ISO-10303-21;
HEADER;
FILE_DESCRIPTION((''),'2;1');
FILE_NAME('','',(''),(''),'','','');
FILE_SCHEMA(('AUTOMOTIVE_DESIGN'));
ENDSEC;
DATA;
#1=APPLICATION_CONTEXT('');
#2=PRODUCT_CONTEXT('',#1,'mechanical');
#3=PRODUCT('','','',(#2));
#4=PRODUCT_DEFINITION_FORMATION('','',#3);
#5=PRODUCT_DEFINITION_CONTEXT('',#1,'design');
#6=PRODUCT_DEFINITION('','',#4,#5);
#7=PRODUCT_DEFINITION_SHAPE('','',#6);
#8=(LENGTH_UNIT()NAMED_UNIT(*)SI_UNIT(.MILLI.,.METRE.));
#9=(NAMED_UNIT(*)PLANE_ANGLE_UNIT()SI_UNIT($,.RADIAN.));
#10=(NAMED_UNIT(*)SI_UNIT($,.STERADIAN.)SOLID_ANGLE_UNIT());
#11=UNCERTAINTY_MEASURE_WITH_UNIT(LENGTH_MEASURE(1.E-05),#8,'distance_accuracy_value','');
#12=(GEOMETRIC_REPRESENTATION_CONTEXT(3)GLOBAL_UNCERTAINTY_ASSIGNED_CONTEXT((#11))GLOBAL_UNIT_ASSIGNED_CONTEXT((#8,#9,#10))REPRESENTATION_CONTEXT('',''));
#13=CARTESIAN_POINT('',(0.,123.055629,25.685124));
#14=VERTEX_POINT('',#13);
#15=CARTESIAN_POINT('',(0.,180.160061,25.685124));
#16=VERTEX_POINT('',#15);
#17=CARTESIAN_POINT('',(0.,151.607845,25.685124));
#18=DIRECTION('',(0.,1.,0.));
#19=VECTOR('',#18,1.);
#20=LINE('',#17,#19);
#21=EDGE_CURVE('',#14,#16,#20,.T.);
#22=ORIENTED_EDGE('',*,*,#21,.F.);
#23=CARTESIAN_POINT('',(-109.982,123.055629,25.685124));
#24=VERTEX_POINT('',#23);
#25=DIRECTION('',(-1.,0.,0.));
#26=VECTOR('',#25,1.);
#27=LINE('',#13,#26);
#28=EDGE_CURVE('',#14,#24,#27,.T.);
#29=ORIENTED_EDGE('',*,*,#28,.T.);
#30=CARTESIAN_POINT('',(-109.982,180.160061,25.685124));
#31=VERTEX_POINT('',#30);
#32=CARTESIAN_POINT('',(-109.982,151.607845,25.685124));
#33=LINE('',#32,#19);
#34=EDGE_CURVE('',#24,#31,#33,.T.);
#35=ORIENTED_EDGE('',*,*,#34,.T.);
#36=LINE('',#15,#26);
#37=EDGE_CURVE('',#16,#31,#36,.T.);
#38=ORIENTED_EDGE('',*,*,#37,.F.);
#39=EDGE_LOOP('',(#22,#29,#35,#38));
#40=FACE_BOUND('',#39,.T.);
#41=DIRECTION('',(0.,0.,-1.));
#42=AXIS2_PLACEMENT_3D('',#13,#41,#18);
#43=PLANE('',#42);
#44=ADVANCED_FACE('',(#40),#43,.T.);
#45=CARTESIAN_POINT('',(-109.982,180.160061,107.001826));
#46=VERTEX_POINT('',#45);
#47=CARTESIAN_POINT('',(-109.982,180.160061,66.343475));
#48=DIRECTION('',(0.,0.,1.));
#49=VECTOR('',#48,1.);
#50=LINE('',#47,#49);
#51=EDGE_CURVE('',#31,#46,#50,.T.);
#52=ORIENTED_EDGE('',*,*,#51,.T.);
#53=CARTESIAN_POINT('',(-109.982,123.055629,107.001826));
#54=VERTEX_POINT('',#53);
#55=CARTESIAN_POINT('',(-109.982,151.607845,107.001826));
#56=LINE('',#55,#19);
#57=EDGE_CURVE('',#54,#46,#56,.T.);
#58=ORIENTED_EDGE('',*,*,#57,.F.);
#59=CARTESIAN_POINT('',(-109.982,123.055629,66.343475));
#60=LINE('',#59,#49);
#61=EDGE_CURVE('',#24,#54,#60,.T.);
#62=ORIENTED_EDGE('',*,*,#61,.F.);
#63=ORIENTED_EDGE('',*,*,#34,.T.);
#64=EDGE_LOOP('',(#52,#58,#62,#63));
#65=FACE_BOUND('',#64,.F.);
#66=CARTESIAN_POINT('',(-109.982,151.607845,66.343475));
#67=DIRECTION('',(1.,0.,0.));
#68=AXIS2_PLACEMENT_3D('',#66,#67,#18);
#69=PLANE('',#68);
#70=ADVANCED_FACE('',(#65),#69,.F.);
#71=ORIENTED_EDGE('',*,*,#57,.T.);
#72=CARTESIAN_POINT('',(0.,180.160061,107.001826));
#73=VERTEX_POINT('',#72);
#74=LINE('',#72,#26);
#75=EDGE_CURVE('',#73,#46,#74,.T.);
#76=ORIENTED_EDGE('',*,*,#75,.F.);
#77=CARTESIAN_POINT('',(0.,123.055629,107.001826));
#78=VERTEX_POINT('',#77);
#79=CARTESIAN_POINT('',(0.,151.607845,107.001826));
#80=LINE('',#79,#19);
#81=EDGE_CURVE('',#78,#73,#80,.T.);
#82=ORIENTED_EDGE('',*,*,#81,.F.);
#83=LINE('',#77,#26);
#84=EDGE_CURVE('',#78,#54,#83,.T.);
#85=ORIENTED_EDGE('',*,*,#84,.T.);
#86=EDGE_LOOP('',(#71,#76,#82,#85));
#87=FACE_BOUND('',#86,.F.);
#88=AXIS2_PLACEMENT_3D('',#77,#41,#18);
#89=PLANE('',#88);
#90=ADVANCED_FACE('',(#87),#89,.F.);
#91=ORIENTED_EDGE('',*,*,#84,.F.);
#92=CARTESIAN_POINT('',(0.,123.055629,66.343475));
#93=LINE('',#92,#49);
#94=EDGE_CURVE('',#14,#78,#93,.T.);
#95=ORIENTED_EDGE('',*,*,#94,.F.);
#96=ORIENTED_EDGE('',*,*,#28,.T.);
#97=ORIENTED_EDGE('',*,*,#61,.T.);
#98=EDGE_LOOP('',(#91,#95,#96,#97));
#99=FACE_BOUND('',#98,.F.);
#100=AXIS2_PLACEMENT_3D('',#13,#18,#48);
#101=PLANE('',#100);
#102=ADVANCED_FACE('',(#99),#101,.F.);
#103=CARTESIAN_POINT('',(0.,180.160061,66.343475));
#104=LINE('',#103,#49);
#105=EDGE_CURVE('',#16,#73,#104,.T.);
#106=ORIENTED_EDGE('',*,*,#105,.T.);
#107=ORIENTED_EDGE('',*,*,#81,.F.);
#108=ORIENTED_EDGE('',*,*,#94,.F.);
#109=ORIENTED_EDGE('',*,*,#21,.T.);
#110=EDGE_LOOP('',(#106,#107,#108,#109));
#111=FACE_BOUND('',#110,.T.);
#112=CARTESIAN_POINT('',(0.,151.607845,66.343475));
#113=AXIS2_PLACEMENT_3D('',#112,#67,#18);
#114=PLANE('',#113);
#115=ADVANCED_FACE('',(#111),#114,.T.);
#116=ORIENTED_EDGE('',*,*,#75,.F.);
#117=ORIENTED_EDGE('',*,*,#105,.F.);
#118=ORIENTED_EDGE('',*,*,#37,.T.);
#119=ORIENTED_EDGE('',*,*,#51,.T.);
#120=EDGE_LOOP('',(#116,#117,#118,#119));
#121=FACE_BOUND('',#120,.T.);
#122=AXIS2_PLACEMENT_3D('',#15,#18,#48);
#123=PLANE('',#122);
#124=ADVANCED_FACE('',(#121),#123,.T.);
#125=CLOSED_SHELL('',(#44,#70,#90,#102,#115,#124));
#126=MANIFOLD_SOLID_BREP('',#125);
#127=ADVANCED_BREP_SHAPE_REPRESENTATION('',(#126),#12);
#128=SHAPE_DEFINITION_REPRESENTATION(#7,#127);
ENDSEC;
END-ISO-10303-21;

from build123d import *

# Parameters (mm, degrees)
F5_W     = 57.1044310927
F5_H     = 81.3167020679
F6_DEPTH = 109.982


# Not quite as in the source:
# - the program builds the solid bodies; features that only make, move or delete a surface that nothing else refers to are left out


with BuildPart() as f6:
    # F5 (on Right) → F6 (new body)
    with BuildSketch(Plane.YZ):
        with Locations((151.6078449786, 66.3434751332)):
            Rectangle(F5_W, F5_H)
    extrude(amount=-F6_DEPTH)


solid = f6.part
